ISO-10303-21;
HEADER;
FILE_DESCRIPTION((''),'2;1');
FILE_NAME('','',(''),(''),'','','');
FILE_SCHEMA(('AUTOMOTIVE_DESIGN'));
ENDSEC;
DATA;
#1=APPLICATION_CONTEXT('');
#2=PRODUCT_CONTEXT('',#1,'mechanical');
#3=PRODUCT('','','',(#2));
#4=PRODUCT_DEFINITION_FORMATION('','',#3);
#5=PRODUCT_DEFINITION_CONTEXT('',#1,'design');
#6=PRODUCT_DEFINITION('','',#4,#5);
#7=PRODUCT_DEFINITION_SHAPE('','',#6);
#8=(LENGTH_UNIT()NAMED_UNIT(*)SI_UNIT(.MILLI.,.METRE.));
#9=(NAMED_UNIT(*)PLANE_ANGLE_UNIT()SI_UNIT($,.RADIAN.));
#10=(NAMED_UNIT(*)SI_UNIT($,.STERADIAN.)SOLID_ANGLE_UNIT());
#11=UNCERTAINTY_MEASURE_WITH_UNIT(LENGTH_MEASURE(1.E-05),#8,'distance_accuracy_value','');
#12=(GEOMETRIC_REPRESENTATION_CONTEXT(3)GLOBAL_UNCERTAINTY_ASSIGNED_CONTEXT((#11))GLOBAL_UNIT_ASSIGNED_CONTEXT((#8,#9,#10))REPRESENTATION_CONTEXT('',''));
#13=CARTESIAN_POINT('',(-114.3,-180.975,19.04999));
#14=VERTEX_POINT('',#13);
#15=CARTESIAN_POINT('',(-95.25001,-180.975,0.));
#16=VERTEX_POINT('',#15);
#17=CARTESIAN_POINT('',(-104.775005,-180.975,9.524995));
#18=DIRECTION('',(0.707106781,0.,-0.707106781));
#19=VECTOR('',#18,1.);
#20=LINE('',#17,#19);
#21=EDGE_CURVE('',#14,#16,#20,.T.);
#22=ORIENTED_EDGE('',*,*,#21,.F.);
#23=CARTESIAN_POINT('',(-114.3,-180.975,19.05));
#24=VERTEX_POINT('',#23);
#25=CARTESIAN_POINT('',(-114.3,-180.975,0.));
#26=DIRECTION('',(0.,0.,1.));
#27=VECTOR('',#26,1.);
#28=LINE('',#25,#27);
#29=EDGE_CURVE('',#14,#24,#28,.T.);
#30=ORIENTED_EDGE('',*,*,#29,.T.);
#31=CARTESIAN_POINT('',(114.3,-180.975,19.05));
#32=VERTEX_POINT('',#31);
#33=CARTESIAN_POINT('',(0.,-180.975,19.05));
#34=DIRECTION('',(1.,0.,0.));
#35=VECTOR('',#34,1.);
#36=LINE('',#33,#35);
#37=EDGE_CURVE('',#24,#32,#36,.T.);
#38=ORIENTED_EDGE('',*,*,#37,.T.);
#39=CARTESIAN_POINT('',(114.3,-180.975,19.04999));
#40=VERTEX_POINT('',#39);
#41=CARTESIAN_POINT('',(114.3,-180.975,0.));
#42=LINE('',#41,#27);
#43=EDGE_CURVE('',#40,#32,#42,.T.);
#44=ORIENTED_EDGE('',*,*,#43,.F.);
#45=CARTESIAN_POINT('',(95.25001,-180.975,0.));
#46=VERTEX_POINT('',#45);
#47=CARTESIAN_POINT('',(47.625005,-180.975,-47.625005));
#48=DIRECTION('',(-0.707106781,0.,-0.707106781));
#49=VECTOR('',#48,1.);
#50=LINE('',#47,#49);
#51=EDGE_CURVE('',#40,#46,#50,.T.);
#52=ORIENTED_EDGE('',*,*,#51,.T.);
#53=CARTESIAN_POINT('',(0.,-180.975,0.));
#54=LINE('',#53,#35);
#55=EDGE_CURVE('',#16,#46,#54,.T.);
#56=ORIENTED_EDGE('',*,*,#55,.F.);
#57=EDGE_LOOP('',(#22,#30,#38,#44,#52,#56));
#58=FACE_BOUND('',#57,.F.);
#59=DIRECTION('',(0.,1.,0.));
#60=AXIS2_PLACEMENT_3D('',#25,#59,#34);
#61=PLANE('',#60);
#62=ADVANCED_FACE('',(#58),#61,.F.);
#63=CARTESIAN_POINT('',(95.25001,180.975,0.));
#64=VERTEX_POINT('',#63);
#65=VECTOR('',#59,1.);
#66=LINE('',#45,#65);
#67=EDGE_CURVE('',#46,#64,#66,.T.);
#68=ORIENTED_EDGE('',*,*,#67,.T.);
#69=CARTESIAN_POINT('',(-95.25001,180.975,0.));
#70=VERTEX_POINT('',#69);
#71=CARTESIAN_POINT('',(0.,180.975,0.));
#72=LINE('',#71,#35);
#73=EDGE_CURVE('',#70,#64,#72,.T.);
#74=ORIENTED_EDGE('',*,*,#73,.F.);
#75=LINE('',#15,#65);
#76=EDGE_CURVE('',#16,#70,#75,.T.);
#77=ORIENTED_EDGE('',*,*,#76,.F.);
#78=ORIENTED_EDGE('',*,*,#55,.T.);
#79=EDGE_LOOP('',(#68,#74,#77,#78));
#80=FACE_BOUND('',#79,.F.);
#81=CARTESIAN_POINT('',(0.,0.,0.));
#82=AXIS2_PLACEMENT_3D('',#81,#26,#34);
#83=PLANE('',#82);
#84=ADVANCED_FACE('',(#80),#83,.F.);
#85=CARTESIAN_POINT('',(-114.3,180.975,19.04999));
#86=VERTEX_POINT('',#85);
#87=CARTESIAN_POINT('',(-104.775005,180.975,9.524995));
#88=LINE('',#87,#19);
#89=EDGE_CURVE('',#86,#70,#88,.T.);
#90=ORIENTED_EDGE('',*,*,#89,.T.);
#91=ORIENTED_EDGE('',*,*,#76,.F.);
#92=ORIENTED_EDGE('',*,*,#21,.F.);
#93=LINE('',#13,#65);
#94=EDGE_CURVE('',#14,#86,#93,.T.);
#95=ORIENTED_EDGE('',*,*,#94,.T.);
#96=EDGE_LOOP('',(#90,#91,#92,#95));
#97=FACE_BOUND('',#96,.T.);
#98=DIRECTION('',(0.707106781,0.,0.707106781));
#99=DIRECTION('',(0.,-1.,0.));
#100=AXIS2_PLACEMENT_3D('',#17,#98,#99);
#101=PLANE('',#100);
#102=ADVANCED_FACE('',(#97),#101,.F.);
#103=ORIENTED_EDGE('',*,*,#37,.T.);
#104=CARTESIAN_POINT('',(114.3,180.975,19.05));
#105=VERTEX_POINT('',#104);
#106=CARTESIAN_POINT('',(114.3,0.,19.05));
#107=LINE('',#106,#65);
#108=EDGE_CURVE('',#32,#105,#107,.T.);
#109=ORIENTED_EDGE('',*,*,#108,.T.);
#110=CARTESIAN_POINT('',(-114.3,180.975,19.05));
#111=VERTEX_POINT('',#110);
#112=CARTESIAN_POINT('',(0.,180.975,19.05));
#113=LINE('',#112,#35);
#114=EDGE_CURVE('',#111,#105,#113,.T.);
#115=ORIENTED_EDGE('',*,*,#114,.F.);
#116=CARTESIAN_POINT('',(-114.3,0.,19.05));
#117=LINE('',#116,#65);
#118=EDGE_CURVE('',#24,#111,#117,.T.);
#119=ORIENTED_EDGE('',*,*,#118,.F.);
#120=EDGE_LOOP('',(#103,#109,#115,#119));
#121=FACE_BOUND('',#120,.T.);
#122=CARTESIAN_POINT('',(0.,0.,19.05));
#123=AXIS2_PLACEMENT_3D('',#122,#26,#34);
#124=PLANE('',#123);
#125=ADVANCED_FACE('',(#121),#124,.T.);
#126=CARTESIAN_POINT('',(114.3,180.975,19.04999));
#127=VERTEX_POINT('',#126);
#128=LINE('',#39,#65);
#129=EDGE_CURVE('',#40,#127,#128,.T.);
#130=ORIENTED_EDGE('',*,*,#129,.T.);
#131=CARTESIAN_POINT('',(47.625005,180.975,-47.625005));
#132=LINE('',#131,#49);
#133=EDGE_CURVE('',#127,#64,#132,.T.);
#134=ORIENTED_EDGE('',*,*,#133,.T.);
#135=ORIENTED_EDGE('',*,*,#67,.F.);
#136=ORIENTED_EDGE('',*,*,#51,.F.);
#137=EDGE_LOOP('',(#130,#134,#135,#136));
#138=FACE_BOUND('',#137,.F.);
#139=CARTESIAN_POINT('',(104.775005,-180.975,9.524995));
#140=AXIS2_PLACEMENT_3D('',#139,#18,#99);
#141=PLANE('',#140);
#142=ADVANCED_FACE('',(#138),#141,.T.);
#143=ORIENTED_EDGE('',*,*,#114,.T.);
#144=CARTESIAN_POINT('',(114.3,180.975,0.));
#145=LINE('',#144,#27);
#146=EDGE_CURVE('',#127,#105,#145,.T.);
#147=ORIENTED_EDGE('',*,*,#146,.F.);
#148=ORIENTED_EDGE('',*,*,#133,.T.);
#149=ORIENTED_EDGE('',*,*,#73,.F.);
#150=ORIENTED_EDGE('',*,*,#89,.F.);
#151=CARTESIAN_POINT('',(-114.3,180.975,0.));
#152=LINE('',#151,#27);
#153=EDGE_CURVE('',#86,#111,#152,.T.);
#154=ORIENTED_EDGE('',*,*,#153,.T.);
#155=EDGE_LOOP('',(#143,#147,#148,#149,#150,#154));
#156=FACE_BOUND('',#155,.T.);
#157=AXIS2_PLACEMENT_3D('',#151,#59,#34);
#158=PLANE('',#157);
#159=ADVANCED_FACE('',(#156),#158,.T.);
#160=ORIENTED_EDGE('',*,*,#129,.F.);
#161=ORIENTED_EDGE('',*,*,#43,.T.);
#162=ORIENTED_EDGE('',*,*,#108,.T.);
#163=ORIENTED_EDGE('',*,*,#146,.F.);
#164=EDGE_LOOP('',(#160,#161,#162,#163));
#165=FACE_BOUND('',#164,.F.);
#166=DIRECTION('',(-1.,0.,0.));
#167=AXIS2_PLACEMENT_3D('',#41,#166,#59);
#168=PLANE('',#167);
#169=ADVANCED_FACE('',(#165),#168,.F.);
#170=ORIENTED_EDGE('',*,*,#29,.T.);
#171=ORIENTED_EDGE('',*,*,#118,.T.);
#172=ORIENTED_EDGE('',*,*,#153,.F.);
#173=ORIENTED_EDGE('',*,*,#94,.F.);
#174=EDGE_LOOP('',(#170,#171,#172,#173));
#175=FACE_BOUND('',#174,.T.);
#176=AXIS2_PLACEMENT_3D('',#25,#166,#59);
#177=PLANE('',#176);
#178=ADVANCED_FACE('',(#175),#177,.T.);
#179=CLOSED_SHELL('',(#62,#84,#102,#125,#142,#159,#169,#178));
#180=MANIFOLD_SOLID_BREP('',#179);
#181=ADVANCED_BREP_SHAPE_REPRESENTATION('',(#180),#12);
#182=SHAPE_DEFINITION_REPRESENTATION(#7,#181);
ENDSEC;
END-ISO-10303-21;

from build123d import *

# Parameters (mm, degrees)
F0_W     = 228.6
F0_H     = 361.95
F1_DEPTH = 19.05
F2_SIZE  = 19.04999


# Not quite as in the source:
# - a fillet or chamfer is up to 0.001 mm smaller than in the source, because OpenCascade refuses the exact size


with BuildPart() as f1:
    # F0 (on Top) → F1 (new body)
    with BuildSketch(Plane.XY):
        Rectangle(F0_W, F0_H)
    extrude(amount=F1_DEPTH)

    # F2 (size 19.05 in the source; OpenCascade refuses exactly that, so slightly less here)
    f2_edges = [f1.edges().sort_by_distance(p)[0] for p in [
        (114.3, 0, 0),
        (-114.3, 0, 0),
    ]]
    chamfer(f2_edges, length=F2_SIZE)


solid = f1.part
